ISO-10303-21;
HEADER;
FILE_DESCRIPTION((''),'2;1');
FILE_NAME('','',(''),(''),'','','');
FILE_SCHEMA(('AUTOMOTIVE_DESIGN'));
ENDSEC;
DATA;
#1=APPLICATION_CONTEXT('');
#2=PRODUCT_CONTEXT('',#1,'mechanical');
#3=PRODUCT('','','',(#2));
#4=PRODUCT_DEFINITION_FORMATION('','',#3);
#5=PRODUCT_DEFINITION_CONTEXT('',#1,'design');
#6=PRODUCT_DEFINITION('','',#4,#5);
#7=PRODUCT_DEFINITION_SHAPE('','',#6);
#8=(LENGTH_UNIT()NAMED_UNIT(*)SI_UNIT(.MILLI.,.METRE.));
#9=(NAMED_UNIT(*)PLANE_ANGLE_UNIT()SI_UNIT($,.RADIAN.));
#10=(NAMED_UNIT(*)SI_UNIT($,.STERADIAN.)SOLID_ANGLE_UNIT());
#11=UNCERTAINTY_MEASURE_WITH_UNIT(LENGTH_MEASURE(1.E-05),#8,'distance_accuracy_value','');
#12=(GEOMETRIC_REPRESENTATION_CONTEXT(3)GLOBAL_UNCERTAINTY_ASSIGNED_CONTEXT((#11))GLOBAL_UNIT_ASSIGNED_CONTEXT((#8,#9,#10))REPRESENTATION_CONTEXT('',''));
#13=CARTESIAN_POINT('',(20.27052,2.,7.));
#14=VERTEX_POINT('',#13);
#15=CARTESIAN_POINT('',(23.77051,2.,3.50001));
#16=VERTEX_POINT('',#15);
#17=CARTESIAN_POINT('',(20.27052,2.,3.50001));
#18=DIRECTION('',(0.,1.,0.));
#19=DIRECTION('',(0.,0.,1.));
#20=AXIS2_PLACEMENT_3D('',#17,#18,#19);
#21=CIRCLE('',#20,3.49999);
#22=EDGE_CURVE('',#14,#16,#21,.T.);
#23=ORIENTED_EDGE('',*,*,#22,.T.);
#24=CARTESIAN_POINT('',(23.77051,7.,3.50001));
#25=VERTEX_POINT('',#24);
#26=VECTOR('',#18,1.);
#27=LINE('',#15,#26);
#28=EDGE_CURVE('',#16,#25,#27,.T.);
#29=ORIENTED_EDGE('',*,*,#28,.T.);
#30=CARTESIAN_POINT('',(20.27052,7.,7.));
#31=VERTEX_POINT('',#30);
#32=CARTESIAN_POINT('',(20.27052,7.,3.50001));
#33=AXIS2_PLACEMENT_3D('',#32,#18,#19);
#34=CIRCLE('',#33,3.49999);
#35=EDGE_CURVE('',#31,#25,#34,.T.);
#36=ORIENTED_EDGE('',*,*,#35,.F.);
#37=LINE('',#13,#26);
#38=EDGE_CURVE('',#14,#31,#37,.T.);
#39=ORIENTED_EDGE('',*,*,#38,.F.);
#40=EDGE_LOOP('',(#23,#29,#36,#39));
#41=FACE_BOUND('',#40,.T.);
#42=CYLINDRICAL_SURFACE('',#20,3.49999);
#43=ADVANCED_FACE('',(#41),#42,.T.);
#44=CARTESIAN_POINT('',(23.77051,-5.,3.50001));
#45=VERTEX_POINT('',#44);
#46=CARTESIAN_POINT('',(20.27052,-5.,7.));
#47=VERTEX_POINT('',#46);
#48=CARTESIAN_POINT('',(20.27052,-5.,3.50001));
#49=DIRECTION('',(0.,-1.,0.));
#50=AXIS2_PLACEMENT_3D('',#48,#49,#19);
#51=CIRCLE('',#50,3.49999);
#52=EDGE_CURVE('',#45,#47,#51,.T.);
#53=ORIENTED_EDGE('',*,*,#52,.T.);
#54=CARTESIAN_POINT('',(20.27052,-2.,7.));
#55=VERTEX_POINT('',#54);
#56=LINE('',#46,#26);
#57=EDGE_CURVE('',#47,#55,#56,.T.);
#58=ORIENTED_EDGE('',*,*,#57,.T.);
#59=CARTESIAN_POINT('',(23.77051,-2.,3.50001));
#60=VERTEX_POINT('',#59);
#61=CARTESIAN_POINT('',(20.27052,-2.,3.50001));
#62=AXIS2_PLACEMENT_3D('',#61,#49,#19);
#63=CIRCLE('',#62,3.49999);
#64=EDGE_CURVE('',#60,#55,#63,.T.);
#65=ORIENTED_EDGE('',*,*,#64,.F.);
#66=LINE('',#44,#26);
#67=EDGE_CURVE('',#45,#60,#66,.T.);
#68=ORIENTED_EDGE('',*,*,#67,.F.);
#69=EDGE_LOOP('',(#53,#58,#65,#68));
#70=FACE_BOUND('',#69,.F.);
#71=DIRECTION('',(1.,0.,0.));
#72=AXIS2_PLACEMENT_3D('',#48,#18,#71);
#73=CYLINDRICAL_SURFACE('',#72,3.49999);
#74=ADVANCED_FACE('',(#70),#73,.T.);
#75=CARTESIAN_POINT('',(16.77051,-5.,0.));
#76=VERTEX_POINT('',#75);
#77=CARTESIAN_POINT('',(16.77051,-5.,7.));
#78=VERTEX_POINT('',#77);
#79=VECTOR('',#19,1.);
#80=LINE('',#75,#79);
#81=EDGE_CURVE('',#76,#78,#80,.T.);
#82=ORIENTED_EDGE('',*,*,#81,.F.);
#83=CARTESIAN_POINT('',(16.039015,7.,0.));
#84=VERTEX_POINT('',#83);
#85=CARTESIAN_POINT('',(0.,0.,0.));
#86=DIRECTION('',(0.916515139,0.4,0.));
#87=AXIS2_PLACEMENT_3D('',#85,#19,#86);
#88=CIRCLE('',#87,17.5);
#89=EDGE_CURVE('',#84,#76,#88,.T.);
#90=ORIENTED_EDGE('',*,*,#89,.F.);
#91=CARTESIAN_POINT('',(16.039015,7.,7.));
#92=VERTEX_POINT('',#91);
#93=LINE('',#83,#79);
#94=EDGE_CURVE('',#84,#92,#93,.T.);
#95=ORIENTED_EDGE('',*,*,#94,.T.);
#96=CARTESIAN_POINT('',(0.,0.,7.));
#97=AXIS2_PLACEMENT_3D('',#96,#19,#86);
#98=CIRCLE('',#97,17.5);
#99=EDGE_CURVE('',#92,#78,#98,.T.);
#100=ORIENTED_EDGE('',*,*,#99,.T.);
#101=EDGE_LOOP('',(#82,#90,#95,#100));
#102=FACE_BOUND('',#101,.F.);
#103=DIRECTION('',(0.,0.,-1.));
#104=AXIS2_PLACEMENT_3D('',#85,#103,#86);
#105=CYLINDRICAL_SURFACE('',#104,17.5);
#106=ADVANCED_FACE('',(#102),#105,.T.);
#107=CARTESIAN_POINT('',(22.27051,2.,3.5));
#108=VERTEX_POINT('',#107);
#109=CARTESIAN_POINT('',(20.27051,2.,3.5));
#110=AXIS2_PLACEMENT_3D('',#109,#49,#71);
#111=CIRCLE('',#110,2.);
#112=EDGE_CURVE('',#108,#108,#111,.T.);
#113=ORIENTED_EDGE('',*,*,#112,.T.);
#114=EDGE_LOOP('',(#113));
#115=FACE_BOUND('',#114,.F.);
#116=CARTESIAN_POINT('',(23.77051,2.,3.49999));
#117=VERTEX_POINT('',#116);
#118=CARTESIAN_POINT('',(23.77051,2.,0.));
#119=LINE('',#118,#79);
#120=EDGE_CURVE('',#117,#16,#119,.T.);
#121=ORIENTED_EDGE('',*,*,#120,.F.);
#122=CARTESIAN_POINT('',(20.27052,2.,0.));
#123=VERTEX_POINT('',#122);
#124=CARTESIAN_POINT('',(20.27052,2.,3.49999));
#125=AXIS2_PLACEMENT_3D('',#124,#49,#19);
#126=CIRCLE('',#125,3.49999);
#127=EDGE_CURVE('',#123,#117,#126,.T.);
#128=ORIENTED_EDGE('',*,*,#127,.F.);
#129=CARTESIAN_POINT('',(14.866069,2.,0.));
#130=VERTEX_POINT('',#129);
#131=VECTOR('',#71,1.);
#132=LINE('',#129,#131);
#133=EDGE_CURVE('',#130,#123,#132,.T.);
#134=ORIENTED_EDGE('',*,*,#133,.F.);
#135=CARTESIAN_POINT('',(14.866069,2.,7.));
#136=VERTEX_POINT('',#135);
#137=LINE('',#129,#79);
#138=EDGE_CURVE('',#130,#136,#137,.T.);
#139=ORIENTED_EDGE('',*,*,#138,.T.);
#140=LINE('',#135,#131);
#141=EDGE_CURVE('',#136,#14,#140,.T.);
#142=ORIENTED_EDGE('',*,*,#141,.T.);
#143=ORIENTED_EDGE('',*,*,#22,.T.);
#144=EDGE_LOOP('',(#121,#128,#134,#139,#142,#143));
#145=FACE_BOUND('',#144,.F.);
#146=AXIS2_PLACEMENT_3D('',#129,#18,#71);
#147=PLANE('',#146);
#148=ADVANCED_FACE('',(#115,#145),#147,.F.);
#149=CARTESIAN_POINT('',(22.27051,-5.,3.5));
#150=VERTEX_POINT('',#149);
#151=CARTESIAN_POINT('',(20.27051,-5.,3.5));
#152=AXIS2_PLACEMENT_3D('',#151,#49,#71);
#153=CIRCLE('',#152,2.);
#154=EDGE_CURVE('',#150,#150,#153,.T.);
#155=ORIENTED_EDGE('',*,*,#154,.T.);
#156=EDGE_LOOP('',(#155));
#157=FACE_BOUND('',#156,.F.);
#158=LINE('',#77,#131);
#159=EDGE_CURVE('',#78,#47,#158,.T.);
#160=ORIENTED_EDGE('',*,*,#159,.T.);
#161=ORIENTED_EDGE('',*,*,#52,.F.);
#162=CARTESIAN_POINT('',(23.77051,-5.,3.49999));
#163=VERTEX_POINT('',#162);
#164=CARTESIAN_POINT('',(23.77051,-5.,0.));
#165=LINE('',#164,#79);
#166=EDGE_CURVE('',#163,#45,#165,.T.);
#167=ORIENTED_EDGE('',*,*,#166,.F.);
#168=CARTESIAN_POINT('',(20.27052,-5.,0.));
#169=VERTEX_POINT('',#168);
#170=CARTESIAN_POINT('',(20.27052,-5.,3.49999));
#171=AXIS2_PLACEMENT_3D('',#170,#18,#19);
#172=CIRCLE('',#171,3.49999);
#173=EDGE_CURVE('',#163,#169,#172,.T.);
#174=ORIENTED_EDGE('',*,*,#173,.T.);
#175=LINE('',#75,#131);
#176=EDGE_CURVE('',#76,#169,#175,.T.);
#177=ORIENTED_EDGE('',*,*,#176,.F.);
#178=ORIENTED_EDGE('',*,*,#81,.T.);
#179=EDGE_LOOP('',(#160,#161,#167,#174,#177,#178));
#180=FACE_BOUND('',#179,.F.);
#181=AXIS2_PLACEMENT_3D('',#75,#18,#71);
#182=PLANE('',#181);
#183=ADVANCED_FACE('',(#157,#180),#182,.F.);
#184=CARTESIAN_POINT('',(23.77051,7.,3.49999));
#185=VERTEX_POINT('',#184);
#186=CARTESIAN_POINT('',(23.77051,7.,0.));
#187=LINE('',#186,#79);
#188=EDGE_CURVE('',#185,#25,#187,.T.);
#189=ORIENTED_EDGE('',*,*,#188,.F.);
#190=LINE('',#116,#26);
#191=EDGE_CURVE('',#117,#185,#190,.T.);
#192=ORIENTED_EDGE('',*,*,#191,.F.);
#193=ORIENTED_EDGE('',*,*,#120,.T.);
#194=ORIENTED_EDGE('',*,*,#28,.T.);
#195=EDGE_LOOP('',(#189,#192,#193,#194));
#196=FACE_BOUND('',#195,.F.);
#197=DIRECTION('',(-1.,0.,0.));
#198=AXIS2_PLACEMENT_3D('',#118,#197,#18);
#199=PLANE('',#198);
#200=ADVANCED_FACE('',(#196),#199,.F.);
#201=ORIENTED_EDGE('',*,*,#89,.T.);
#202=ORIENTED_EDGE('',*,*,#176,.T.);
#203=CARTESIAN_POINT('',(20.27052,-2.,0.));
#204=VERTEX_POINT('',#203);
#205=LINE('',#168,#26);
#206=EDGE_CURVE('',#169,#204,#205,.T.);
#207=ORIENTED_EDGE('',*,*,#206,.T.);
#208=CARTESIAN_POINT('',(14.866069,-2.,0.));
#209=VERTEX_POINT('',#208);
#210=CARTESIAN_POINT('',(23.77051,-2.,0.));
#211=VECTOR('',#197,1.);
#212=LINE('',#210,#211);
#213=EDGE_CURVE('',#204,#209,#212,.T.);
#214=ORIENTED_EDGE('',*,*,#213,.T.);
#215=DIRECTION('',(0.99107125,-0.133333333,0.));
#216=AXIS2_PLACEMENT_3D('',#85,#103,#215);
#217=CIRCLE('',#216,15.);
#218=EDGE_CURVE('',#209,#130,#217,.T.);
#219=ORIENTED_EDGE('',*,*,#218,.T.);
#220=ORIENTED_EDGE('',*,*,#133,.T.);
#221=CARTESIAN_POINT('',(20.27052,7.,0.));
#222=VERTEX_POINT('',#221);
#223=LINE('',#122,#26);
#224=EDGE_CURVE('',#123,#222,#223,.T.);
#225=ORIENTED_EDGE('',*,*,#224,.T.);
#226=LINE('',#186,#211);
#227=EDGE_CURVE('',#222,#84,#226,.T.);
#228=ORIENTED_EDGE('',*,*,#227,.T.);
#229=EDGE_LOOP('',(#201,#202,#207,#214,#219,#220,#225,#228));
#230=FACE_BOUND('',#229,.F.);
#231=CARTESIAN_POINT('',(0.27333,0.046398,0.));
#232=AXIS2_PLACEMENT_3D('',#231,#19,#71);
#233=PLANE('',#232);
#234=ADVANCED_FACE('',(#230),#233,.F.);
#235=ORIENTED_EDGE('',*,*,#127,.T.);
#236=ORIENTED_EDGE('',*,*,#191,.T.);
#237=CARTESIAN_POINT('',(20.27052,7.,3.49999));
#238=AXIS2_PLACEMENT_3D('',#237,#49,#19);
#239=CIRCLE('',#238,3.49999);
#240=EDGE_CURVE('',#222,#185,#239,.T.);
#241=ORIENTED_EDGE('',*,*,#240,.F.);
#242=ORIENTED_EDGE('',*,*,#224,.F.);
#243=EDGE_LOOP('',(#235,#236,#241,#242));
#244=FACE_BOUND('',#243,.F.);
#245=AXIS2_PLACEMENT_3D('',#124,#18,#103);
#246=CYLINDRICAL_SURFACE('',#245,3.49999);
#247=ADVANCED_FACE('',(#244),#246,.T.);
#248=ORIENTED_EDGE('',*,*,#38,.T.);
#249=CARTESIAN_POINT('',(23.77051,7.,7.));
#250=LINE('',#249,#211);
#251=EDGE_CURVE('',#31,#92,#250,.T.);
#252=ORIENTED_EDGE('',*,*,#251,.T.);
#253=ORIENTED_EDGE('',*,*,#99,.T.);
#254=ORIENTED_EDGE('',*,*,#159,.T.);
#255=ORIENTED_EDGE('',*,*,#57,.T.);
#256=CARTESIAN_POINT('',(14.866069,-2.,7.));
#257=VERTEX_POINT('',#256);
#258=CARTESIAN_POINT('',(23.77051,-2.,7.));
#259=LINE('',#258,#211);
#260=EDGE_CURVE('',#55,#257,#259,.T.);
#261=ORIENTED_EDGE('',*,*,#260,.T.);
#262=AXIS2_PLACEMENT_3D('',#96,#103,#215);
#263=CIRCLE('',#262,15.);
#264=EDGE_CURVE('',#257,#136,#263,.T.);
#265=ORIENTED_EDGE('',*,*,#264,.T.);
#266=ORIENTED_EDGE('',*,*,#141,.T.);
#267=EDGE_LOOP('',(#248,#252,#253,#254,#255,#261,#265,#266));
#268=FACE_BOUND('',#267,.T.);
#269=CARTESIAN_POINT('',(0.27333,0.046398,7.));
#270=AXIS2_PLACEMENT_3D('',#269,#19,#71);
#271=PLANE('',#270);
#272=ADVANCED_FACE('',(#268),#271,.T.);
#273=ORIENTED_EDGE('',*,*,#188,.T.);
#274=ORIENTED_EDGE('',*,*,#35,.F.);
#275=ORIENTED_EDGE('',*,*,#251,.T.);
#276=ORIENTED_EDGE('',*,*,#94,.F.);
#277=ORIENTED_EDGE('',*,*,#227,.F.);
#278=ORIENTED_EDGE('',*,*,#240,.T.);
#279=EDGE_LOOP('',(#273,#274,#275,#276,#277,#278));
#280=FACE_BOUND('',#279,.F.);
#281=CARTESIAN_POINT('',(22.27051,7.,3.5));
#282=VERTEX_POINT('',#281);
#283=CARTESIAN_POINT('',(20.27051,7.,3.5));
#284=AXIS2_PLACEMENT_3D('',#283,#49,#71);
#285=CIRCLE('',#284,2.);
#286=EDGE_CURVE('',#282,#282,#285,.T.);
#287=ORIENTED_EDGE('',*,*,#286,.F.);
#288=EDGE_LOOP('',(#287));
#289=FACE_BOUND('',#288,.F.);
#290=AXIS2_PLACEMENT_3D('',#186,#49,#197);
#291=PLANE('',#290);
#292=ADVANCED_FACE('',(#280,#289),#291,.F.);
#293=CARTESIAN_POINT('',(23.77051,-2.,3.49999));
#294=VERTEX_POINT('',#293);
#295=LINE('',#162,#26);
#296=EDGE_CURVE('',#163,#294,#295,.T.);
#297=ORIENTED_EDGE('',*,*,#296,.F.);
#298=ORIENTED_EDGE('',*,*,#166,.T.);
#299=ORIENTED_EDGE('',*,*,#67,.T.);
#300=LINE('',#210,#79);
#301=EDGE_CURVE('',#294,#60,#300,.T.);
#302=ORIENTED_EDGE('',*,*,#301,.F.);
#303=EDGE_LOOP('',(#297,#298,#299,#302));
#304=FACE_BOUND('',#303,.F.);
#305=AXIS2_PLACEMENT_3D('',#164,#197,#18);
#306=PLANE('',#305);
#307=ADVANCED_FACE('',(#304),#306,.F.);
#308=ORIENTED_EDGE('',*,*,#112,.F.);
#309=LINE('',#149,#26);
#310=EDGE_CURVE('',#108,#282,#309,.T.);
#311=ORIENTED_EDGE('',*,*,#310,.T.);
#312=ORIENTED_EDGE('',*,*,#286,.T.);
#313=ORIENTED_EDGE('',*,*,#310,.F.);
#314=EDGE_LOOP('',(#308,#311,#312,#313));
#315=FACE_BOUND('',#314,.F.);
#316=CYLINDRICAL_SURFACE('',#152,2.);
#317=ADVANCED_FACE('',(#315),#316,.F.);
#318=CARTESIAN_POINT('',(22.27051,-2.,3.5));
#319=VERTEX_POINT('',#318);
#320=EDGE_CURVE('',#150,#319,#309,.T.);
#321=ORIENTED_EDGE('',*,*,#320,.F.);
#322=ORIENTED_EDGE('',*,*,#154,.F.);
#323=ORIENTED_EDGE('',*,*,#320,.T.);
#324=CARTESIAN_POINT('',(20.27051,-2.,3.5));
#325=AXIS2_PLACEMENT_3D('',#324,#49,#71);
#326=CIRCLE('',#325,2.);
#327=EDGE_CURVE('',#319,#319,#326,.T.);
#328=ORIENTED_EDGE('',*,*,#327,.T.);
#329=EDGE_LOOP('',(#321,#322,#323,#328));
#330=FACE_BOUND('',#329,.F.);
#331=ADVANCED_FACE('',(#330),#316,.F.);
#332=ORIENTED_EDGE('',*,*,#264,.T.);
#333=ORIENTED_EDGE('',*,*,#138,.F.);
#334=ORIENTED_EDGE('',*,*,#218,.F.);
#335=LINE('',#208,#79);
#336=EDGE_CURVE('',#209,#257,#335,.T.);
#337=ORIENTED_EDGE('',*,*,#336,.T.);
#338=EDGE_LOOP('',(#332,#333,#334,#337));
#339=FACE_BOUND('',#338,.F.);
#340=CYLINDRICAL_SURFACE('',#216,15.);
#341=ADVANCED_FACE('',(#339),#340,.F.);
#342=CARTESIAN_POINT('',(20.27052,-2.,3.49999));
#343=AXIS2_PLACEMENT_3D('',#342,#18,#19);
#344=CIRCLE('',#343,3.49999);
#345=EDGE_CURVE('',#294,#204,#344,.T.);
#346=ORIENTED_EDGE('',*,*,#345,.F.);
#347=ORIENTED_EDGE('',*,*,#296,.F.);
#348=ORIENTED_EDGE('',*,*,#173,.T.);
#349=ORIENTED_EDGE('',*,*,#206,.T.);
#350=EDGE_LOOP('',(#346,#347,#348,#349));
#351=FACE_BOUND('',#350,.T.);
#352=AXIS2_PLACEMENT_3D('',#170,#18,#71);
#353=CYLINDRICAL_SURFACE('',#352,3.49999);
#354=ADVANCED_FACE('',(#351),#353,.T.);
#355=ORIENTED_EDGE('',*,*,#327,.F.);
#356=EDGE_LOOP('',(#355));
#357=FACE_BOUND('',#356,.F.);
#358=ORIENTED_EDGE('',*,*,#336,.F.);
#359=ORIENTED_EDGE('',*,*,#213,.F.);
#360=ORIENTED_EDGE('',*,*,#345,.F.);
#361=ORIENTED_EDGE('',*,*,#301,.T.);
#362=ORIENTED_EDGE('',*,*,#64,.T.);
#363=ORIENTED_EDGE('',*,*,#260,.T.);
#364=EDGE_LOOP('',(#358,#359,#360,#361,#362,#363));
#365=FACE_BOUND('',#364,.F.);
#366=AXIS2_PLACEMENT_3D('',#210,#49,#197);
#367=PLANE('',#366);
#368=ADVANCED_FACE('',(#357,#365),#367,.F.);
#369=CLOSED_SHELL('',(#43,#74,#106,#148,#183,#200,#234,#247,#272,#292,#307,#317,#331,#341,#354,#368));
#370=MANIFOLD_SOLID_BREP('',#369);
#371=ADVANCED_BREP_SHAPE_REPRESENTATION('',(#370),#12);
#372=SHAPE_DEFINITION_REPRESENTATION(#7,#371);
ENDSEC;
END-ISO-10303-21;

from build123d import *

# Parameters (mm, degrees)
F0_W     = 7
F0_H     = 2
F1_DEPTH = 7
F2_R     = 2
F3_DEPTH = 25
F4_R     = 3.49999


# Not quite as in the source:
# - a fillet or chamfer is up to 0.001 mm smaller than in the source, because OpenCascade refuses the exact size


with BuildPart() as f1:
    # F0 (on Top) → F1 (new body)
    with BuildSketch(Plane.XY):
        with BuildLine():
            ThreePointArc((14.8660687473, -2), (-15, 0), (14.8660687473, 2))
            Line((14.8660687473, 2), (16.7705098312, 2))
            Line((16.7705098312, 2), (16.7705098312, 5))
            Line((16.7705098312, 5), (16.0390149323, 5))
            Line((16.0390149323, 5), (16.0390149323, 7))
            ThreePointArc((16.0390149323, 7), (-17.4675765006, -1.0647869255), (16.7705098312, -5))
            Line((16.7705098312, -5), (16.7705098312, -2))
            Line((16.7705098312, -2), (14.8660687473, -2))
        make_face()
        with BuildLine():
            Line((16.7705098312, 5), (16.7705098312, 2))
            Line((16.7705098312, 2), (17.3853386507, 2))
            ThreePointArc((17.3853386507, 2), (17.1436721965, 3.5134745793), (16.7705098312, 5))
        make_face()
        with BuildLine():
            ThreePointArc((16.7705098312, 5), (17.1436721965, 3.5134745793), (17.3853386507, 2))
            Line((17.3853386507, 2), (23.7705098312, 2))
            Line((23.7705098312, 2), (23.7705098312, 5))
            Line((23.7705098312, 5), (16.7705098312, 5))
        make_face()
        with BuildLine():
            Line((23.7705098312, -2), (17.3853386507, -2))
            ThreePointArc((17.3853386507, -2), (17.1436721965, -3.5134745793), (16.7705098312, -5))
            Line((16.7705098312, -5), (23.7705098312, -5))
            Line((23.7705098312, -5), (23.7705098312, -2))
        make_face()
        with BuildLine():
            Line((17.3853386507, -2), (16.7705098312, -2))
            Line((16.7705098312, -2), (16.7705098312, -5))
            ThreePointArc((16.7705098312, -5), (17.1436721965, -3.5134745793), (17.3853386507, -2))
        make_face()
        with Locations((20.2705098312, 6)):
            Rectangle(F0_W, F0_H)
        with BuildLine():
            Line((16.0390149323, 5), (16.7705098312, 5))
            ThreePointArc((16.7705098312, 5), (16.4352130745, 6.0111372632), (16.0390149323, 7))
            Line((16.0390149323, 7), (16.0390149323, 5))
        make_face()
        with BuildLine():
            ThreePointArc((16.0390149323, 7), (16.4352130745, 6.0111372632), (16.7705098312, 5))
            Line((16.7705098312, 5), (16.7705098312, 7))
            Line((16.7705098312, 7), (16.0390149323, 7))
        make_face()
    extrude(amount=F1_DEPTH)

    # F2 (on face) → F3 (cut)
    with BuildSketch(Plane.XZ.offset(5)):
        with Locations((20.2705098312, 3.5)):
            Circle(F2_R)
    extrude(amount=-F3_DEPTH, mode=Mode.SUBTRACT)

    # F4 (radius 3.5 in the source; OpenCascade refuses exactly that, so slightly less here)
    f4_edges = [f1.edges().sort_by_distance(p)[0] for p in [
        (23.77051, -3.5, 7),
        (23.77051, 4.5, 7),
        (23.77051, -3.5, 0),
        (23.77051, 4.5, 0),
    ]]
    fillet(f4_edges, radius=F4_R)


solid = f1.part
